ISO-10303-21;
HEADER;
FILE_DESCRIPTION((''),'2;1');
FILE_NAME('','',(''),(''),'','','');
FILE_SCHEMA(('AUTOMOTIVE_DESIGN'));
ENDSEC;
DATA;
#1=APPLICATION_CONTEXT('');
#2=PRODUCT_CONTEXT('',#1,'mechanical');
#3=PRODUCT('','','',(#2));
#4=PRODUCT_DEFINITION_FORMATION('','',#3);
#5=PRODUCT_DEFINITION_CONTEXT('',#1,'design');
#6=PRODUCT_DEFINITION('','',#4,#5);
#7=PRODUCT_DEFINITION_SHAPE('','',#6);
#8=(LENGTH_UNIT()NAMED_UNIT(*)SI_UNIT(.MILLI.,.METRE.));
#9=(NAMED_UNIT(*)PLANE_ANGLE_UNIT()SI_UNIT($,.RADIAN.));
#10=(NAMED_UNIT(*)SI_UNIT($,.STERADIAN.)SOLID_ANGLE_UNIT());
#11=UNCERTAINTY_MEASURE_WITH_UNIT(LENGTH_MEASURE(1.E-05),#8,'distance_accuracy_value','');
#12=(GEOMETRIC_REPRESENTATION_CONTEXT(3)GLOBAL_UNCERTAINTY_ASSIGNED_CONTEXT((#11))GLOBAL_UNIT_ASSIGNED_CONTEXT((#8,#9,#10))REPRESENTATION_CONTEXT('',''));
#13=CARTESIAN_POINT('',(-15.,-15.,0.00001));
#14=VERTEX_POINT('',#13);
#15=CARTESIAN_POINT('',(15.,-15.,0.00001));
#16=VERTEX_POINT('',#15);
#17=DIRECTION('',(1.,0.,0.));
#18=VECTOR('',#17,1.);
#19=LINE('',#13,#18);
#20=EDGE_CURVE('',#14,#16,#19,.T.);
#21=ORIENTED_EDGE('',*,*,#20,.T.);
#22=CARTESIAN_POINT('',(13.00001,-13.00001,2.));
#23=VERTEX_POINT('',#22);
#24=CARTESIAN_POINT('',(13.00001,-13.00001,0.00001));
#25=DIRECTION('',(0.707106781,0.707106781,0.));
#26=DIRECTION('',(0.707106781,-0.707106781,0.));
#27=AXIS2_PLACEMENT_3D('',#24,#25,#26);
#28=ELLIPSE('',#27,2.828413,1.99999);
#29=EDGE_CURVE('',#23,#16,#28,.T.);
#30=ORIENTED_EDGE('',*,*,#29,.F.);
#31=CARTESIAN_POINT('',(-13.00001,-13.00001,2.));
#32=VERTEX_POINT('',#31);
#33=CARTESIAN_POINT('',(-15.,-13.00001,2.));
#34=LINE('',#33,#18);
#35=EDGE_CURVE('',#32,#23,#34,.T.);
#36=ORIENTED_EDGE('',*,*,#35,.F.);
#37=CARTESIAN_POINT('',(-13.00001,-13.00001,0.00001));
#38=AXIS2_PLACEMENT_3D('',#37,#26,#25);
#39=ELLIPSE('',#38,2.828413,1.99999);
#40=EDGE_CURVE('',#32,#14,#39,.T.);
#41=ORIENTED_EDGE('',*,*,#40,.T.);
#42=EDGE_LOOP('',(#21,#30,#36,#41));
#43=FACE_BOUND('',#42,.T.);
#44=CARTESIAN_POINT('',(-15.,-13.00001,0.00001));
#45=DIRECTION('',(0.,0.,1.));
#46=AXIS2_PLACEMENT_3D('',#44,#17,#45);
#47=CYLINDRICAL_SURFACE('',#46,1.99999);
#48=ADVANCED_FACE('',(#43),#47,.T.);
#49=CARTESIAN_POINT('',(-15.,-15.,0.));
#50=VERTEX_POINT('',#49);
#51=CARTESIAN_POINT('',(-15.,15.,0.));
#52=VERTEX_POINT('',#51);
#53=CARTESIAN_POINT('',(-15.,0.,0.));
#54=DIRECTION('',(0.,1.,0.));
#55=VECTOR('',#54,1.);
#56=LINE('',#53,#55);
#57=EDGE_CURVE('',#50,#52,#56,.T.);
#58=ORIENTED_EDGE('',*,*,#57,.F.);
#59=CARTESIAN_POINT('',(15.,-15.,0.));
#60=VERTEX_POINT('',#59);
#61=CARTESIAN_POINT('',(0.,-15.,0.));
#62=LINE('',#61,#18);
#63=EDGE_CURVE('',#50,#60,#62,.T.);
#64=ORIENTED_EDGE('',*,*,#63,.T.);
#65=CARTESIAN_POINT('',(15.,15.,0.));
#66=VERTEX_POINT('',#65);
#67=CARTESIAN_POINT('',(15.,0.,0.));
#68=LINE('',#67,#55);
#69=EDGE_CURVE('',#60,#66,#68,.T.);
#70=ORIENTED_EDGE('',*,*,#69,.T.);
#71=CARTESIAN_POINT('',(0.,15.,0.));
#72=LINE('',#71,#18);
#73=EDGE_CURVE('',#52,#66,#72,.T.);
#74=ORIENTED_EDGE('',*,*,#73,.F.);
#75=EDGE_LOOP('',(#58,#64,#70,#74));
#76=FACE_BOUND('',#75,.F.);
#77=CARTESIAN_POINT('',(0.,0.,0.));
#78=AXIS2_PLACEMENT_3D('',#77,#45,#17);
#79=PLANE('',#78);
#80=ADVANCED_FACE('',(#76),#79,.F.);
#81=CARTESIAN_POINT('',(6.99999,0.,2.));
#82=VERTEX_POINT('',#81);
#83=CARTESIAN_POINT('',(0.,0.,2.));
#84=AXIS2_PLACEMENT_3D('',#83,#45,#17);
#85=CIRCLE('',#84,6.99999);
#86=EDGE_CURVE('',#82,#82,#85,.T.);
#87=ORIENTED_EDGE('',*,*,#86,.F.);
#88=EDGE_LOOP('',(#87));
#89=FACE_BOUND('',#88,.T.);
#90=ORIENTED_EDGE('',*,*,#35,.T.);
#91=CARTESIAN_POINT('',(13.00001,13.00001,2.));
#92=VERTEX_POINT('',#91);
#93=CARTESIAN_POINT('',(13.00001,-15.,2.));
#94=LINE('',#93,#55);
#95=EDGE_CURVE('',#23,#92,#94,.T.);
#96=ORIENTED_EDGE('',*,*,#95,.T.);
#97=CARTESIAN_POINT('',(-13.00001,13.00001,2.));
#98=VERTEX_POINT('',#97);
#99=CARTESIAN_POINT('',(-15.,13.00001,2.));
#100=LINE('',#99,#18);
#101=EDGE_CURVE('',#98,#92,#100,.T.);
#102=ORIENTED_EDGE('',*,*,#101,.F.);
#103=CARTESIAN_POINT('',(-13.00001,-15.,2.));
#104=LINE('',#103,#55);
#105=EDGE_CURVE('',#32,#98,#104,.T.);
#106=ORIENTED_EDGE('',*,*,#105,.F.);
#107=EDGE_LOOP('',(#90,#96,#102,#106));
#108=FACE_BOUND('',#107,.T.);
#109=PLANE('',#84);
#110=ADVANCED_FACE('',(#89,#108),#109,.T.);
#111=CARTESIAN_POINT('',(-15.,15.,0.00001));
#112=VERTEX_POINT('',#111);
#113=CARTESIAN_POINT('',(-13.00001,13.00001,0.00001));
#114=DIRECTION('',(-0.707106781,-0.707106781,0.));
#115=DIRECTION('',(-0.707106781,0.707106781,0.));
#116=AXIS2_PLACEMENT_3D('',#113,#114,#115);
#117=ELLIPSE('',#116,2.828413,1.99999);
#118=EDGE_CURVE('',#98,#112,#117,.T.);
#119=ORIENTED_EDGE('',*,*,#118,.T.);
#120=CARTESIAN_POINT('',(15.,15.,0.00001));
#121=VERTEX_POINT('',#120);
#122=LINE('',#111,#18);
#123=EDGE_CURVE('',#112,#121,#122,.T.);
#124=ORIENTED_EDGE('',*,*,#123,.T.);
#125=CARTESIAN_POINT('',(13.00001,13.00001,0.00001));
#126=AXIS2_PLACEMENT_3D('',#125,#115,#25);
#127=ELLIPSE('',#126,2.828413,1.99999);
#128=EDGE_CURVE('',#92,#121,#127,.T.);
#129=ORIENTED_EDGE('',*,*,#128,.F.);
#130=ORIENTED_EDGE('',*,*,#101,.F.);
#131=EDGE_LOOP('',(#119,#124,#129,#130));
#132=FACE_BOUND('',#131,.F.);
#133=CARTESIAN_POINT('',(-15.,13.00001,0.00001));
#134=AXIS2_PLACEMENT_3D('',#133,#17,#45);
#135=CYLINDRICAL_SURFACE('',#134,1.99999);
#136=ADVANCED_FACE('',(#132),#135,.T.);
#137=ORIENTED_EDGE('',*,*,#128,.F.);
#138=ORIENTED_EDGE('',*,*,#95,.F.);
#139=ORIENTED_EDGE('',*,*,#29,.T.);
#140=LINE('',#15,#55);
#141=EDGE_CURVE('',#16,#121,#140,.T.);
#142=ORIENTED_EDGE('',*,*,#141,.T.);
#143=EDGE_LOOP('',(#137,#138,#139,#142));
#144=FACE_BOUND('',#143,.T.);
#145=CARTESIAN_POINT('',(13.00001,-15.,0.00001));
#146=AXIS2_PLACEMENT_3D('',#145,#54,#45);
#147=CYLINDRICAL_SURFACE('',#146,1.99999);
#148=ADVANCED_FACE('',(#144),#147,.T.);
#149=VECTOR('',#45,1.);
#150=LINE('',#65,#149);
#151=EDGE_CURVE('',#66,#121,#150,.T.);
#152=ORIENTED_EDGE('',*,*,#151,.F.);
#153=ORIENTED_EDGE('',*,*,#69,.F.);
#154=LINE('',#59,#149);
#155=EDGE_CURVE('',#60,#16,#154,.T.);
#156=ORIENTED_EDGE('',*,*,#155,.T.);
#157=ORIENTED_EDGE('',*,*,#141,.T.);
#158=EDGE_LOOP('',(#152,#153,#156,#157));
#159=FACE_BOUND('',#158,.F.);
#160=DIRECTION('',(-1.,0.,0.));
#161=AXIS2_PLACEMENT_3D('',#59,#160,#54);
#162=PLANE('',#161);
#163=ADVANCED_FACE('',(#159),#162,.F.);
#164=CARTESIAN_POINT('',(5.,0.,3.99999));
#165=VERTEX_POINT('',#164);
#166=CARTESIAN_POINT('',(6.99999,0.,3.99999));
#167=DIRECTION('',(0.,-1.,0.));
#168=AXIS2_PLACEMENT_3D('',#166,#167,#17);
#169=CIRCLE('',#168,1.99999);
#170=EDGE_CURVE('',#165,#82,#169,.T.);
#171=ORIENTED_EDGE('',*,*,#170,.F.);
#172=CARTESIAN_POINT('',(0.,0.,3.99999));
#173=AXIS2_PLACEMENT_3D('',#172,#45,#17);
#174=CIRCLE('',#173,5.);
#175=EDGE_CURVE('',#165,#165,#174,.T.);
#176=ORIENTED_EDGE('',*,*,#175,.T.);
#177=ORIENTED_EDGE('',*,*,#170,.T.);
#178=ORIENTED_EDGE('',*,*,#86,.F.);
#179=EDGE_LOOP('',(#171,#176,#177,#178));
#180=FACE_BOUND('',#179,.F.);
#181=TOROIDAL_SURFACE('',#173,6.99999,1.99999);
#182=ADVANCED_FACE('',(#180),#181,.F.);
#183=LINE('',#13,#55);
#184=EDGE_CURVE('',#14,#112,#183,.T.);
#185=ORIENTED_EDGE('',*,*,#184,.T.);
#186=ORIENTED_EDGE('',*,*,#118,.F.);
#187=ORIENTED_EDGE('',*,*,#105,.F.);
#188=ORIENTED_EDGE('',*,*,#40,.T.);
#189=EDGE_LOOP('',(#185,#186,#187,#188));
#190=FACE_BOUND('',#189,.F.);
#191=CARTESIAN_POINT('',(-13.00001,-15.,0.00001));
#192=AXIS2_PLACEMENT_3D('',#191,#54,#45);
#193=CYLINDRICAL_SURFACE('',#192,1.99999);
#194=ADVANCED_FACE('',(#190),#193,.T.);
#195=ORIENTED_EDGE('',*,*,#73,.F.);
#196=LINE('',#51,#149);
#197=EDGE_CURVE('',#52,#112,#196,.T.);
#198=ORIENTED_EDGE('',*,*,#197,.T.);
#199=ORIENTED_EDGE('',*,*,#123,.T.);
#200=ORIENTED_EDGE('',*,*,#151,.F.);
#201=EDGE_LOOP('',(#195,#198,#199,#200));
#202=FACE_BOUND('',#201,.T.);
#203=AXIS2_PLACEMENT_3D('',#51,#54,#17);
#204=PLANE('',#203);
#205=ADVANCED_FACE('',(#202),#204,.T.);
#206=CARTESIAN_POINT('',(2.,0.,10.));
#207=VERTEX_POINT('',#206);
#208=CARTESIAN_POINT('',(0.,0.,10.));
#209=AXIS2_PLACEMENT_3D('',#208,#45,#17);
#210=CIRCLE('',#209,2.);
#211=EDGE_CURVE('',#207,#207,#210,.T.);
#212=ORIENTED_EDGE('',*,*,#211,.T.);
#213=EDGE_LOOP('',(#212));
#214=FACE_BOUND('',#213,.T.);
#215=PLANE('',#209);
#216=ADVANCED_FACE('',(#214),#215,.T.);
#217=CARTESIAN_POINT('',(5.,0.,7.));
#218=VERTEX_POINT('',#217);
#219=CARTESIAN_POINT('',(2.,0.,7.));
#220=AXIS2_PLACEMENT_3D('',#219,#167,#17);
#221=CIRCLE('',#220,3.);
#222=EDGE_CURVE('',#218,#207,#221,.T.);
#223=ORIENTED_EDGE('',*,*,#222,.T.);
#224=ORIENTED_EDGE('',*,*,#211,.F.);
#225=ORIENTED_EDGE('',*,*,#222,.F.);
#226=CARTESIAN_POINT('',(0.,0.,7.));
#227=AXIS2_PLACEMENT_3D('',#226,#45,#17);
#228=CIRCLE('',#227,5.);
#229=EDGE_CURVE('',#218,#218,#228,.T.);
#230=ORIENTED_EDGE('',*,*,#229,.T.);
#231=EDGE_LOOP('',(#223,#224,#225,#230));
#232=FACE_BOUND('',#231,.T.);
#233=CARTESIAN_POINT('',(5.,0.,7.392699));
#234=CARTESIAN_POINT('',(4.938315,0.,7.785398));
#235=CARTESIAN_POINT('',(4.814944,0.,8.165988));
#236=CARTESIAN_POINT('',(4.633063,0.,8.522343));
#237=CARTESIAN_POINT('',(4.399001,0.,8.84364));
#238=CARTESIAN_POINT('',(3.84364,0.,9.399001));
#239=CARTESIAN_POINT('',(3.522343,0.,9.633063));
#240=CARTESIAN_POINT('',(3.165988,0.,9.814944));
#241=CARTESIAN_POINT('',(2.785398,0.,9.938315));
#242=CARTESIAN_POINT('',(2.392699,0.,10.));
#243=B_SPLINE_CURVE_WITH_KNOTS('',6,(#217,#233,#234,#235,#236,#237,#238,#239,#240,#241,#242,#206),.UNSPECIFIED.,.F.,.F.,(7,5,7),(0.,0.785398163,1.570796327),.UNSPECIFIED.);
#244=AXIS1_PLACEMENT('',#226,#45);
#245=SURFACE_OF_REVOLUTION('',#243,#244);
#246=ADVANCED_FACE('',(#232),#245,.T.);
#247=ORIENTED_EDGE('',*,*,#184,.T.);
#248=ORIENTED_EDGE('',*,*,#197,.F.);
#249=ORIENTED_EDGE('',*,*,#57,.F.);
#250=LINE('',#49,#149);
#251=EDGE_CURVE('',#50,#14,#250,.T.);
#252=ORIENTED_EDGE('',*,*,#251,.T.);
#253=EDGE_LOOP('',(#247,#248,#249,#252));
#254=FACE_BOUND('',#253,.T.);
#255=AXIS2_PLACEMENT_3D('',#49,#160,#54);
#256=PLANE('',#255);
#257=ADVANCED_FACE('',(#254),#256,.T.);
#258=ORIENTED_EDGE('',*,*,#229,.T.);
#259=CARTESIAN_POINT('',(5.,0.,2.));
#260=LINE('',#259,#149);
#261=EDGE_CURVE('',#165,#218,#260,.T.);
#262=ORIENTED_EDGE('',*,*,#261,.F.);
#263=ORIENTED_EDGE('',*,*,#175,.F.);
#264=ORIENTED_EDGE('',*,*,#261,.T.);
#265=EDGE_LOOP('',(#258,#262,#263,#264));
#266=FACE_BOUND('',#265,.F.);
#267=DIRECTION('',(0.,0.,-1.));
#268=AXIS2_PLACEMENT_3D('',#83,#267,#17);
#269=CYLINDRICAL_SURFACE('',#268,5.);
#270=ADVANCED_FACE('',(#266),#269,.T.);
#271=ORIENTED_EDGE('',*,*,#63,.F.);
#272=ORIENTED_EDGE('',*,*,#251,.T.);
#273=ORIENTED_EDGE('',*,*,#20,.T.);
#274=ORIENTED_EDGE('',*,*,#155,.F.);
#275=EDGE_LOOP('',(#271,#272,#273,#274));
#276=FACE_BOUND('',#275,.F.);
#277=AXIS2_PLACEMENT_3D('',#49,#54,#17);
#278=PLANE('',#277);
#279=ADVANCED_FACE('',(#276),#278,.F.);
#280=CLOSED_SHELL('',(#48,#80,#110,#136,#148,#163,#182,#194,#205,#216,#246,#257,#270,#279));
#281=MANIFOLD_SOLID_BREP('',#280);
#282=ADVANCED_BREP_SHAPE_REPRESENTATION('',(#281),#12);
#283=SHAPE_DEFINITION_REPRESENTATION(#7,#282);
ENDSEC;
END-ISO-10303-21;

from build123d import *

# Parameters (mm, degrees)
F0_W     = 30
F0_H     = 30
F1_DEPTH = 2
F2_R     = 5
F3_DEPTH = 8
F4_R     = 3
F5_R     = 1.99999


# Not quite as in the source:
# - a fillet or chamfer is up to 0.001 mm smaller than in the source, because OpenCascade refuses the exact size


with BuildPart() as f1:
    # F0 (on Top) → F1 (new body)
    with BuildSketch(Plane.XY):
        Rectangle(F0_W, F0_H)
    extrude(amount=F1_DEPTH)

    # F2 (on face) → F3 (join)
    with BuildSketch(Plane.XY.offset(2)):
        Circle(F2_R)
    extrude(amount=F3_DEPTH)

    # F4
    f4_edges = [f1.edges().sort_by_distance(p)[0] for p in [
        (-5, 0, 10),
    ]]
    fillet(f4_edges, radius=F4_R)

    # F5 (radius 2 in the source; OpenCascade refuses exactly that, so slightly less here)
    f5_edges = [f1.edges().sort_by_distance(p)[0] for p in [
        (0, -15, 2),
        (-15, 0, 2),
        (15, 0, 2),
        (0, 15, 2),
        (-5, 0, 2),
    ]]
    fillet(f5_edges, radius=F5_R)


solid = f1.part
